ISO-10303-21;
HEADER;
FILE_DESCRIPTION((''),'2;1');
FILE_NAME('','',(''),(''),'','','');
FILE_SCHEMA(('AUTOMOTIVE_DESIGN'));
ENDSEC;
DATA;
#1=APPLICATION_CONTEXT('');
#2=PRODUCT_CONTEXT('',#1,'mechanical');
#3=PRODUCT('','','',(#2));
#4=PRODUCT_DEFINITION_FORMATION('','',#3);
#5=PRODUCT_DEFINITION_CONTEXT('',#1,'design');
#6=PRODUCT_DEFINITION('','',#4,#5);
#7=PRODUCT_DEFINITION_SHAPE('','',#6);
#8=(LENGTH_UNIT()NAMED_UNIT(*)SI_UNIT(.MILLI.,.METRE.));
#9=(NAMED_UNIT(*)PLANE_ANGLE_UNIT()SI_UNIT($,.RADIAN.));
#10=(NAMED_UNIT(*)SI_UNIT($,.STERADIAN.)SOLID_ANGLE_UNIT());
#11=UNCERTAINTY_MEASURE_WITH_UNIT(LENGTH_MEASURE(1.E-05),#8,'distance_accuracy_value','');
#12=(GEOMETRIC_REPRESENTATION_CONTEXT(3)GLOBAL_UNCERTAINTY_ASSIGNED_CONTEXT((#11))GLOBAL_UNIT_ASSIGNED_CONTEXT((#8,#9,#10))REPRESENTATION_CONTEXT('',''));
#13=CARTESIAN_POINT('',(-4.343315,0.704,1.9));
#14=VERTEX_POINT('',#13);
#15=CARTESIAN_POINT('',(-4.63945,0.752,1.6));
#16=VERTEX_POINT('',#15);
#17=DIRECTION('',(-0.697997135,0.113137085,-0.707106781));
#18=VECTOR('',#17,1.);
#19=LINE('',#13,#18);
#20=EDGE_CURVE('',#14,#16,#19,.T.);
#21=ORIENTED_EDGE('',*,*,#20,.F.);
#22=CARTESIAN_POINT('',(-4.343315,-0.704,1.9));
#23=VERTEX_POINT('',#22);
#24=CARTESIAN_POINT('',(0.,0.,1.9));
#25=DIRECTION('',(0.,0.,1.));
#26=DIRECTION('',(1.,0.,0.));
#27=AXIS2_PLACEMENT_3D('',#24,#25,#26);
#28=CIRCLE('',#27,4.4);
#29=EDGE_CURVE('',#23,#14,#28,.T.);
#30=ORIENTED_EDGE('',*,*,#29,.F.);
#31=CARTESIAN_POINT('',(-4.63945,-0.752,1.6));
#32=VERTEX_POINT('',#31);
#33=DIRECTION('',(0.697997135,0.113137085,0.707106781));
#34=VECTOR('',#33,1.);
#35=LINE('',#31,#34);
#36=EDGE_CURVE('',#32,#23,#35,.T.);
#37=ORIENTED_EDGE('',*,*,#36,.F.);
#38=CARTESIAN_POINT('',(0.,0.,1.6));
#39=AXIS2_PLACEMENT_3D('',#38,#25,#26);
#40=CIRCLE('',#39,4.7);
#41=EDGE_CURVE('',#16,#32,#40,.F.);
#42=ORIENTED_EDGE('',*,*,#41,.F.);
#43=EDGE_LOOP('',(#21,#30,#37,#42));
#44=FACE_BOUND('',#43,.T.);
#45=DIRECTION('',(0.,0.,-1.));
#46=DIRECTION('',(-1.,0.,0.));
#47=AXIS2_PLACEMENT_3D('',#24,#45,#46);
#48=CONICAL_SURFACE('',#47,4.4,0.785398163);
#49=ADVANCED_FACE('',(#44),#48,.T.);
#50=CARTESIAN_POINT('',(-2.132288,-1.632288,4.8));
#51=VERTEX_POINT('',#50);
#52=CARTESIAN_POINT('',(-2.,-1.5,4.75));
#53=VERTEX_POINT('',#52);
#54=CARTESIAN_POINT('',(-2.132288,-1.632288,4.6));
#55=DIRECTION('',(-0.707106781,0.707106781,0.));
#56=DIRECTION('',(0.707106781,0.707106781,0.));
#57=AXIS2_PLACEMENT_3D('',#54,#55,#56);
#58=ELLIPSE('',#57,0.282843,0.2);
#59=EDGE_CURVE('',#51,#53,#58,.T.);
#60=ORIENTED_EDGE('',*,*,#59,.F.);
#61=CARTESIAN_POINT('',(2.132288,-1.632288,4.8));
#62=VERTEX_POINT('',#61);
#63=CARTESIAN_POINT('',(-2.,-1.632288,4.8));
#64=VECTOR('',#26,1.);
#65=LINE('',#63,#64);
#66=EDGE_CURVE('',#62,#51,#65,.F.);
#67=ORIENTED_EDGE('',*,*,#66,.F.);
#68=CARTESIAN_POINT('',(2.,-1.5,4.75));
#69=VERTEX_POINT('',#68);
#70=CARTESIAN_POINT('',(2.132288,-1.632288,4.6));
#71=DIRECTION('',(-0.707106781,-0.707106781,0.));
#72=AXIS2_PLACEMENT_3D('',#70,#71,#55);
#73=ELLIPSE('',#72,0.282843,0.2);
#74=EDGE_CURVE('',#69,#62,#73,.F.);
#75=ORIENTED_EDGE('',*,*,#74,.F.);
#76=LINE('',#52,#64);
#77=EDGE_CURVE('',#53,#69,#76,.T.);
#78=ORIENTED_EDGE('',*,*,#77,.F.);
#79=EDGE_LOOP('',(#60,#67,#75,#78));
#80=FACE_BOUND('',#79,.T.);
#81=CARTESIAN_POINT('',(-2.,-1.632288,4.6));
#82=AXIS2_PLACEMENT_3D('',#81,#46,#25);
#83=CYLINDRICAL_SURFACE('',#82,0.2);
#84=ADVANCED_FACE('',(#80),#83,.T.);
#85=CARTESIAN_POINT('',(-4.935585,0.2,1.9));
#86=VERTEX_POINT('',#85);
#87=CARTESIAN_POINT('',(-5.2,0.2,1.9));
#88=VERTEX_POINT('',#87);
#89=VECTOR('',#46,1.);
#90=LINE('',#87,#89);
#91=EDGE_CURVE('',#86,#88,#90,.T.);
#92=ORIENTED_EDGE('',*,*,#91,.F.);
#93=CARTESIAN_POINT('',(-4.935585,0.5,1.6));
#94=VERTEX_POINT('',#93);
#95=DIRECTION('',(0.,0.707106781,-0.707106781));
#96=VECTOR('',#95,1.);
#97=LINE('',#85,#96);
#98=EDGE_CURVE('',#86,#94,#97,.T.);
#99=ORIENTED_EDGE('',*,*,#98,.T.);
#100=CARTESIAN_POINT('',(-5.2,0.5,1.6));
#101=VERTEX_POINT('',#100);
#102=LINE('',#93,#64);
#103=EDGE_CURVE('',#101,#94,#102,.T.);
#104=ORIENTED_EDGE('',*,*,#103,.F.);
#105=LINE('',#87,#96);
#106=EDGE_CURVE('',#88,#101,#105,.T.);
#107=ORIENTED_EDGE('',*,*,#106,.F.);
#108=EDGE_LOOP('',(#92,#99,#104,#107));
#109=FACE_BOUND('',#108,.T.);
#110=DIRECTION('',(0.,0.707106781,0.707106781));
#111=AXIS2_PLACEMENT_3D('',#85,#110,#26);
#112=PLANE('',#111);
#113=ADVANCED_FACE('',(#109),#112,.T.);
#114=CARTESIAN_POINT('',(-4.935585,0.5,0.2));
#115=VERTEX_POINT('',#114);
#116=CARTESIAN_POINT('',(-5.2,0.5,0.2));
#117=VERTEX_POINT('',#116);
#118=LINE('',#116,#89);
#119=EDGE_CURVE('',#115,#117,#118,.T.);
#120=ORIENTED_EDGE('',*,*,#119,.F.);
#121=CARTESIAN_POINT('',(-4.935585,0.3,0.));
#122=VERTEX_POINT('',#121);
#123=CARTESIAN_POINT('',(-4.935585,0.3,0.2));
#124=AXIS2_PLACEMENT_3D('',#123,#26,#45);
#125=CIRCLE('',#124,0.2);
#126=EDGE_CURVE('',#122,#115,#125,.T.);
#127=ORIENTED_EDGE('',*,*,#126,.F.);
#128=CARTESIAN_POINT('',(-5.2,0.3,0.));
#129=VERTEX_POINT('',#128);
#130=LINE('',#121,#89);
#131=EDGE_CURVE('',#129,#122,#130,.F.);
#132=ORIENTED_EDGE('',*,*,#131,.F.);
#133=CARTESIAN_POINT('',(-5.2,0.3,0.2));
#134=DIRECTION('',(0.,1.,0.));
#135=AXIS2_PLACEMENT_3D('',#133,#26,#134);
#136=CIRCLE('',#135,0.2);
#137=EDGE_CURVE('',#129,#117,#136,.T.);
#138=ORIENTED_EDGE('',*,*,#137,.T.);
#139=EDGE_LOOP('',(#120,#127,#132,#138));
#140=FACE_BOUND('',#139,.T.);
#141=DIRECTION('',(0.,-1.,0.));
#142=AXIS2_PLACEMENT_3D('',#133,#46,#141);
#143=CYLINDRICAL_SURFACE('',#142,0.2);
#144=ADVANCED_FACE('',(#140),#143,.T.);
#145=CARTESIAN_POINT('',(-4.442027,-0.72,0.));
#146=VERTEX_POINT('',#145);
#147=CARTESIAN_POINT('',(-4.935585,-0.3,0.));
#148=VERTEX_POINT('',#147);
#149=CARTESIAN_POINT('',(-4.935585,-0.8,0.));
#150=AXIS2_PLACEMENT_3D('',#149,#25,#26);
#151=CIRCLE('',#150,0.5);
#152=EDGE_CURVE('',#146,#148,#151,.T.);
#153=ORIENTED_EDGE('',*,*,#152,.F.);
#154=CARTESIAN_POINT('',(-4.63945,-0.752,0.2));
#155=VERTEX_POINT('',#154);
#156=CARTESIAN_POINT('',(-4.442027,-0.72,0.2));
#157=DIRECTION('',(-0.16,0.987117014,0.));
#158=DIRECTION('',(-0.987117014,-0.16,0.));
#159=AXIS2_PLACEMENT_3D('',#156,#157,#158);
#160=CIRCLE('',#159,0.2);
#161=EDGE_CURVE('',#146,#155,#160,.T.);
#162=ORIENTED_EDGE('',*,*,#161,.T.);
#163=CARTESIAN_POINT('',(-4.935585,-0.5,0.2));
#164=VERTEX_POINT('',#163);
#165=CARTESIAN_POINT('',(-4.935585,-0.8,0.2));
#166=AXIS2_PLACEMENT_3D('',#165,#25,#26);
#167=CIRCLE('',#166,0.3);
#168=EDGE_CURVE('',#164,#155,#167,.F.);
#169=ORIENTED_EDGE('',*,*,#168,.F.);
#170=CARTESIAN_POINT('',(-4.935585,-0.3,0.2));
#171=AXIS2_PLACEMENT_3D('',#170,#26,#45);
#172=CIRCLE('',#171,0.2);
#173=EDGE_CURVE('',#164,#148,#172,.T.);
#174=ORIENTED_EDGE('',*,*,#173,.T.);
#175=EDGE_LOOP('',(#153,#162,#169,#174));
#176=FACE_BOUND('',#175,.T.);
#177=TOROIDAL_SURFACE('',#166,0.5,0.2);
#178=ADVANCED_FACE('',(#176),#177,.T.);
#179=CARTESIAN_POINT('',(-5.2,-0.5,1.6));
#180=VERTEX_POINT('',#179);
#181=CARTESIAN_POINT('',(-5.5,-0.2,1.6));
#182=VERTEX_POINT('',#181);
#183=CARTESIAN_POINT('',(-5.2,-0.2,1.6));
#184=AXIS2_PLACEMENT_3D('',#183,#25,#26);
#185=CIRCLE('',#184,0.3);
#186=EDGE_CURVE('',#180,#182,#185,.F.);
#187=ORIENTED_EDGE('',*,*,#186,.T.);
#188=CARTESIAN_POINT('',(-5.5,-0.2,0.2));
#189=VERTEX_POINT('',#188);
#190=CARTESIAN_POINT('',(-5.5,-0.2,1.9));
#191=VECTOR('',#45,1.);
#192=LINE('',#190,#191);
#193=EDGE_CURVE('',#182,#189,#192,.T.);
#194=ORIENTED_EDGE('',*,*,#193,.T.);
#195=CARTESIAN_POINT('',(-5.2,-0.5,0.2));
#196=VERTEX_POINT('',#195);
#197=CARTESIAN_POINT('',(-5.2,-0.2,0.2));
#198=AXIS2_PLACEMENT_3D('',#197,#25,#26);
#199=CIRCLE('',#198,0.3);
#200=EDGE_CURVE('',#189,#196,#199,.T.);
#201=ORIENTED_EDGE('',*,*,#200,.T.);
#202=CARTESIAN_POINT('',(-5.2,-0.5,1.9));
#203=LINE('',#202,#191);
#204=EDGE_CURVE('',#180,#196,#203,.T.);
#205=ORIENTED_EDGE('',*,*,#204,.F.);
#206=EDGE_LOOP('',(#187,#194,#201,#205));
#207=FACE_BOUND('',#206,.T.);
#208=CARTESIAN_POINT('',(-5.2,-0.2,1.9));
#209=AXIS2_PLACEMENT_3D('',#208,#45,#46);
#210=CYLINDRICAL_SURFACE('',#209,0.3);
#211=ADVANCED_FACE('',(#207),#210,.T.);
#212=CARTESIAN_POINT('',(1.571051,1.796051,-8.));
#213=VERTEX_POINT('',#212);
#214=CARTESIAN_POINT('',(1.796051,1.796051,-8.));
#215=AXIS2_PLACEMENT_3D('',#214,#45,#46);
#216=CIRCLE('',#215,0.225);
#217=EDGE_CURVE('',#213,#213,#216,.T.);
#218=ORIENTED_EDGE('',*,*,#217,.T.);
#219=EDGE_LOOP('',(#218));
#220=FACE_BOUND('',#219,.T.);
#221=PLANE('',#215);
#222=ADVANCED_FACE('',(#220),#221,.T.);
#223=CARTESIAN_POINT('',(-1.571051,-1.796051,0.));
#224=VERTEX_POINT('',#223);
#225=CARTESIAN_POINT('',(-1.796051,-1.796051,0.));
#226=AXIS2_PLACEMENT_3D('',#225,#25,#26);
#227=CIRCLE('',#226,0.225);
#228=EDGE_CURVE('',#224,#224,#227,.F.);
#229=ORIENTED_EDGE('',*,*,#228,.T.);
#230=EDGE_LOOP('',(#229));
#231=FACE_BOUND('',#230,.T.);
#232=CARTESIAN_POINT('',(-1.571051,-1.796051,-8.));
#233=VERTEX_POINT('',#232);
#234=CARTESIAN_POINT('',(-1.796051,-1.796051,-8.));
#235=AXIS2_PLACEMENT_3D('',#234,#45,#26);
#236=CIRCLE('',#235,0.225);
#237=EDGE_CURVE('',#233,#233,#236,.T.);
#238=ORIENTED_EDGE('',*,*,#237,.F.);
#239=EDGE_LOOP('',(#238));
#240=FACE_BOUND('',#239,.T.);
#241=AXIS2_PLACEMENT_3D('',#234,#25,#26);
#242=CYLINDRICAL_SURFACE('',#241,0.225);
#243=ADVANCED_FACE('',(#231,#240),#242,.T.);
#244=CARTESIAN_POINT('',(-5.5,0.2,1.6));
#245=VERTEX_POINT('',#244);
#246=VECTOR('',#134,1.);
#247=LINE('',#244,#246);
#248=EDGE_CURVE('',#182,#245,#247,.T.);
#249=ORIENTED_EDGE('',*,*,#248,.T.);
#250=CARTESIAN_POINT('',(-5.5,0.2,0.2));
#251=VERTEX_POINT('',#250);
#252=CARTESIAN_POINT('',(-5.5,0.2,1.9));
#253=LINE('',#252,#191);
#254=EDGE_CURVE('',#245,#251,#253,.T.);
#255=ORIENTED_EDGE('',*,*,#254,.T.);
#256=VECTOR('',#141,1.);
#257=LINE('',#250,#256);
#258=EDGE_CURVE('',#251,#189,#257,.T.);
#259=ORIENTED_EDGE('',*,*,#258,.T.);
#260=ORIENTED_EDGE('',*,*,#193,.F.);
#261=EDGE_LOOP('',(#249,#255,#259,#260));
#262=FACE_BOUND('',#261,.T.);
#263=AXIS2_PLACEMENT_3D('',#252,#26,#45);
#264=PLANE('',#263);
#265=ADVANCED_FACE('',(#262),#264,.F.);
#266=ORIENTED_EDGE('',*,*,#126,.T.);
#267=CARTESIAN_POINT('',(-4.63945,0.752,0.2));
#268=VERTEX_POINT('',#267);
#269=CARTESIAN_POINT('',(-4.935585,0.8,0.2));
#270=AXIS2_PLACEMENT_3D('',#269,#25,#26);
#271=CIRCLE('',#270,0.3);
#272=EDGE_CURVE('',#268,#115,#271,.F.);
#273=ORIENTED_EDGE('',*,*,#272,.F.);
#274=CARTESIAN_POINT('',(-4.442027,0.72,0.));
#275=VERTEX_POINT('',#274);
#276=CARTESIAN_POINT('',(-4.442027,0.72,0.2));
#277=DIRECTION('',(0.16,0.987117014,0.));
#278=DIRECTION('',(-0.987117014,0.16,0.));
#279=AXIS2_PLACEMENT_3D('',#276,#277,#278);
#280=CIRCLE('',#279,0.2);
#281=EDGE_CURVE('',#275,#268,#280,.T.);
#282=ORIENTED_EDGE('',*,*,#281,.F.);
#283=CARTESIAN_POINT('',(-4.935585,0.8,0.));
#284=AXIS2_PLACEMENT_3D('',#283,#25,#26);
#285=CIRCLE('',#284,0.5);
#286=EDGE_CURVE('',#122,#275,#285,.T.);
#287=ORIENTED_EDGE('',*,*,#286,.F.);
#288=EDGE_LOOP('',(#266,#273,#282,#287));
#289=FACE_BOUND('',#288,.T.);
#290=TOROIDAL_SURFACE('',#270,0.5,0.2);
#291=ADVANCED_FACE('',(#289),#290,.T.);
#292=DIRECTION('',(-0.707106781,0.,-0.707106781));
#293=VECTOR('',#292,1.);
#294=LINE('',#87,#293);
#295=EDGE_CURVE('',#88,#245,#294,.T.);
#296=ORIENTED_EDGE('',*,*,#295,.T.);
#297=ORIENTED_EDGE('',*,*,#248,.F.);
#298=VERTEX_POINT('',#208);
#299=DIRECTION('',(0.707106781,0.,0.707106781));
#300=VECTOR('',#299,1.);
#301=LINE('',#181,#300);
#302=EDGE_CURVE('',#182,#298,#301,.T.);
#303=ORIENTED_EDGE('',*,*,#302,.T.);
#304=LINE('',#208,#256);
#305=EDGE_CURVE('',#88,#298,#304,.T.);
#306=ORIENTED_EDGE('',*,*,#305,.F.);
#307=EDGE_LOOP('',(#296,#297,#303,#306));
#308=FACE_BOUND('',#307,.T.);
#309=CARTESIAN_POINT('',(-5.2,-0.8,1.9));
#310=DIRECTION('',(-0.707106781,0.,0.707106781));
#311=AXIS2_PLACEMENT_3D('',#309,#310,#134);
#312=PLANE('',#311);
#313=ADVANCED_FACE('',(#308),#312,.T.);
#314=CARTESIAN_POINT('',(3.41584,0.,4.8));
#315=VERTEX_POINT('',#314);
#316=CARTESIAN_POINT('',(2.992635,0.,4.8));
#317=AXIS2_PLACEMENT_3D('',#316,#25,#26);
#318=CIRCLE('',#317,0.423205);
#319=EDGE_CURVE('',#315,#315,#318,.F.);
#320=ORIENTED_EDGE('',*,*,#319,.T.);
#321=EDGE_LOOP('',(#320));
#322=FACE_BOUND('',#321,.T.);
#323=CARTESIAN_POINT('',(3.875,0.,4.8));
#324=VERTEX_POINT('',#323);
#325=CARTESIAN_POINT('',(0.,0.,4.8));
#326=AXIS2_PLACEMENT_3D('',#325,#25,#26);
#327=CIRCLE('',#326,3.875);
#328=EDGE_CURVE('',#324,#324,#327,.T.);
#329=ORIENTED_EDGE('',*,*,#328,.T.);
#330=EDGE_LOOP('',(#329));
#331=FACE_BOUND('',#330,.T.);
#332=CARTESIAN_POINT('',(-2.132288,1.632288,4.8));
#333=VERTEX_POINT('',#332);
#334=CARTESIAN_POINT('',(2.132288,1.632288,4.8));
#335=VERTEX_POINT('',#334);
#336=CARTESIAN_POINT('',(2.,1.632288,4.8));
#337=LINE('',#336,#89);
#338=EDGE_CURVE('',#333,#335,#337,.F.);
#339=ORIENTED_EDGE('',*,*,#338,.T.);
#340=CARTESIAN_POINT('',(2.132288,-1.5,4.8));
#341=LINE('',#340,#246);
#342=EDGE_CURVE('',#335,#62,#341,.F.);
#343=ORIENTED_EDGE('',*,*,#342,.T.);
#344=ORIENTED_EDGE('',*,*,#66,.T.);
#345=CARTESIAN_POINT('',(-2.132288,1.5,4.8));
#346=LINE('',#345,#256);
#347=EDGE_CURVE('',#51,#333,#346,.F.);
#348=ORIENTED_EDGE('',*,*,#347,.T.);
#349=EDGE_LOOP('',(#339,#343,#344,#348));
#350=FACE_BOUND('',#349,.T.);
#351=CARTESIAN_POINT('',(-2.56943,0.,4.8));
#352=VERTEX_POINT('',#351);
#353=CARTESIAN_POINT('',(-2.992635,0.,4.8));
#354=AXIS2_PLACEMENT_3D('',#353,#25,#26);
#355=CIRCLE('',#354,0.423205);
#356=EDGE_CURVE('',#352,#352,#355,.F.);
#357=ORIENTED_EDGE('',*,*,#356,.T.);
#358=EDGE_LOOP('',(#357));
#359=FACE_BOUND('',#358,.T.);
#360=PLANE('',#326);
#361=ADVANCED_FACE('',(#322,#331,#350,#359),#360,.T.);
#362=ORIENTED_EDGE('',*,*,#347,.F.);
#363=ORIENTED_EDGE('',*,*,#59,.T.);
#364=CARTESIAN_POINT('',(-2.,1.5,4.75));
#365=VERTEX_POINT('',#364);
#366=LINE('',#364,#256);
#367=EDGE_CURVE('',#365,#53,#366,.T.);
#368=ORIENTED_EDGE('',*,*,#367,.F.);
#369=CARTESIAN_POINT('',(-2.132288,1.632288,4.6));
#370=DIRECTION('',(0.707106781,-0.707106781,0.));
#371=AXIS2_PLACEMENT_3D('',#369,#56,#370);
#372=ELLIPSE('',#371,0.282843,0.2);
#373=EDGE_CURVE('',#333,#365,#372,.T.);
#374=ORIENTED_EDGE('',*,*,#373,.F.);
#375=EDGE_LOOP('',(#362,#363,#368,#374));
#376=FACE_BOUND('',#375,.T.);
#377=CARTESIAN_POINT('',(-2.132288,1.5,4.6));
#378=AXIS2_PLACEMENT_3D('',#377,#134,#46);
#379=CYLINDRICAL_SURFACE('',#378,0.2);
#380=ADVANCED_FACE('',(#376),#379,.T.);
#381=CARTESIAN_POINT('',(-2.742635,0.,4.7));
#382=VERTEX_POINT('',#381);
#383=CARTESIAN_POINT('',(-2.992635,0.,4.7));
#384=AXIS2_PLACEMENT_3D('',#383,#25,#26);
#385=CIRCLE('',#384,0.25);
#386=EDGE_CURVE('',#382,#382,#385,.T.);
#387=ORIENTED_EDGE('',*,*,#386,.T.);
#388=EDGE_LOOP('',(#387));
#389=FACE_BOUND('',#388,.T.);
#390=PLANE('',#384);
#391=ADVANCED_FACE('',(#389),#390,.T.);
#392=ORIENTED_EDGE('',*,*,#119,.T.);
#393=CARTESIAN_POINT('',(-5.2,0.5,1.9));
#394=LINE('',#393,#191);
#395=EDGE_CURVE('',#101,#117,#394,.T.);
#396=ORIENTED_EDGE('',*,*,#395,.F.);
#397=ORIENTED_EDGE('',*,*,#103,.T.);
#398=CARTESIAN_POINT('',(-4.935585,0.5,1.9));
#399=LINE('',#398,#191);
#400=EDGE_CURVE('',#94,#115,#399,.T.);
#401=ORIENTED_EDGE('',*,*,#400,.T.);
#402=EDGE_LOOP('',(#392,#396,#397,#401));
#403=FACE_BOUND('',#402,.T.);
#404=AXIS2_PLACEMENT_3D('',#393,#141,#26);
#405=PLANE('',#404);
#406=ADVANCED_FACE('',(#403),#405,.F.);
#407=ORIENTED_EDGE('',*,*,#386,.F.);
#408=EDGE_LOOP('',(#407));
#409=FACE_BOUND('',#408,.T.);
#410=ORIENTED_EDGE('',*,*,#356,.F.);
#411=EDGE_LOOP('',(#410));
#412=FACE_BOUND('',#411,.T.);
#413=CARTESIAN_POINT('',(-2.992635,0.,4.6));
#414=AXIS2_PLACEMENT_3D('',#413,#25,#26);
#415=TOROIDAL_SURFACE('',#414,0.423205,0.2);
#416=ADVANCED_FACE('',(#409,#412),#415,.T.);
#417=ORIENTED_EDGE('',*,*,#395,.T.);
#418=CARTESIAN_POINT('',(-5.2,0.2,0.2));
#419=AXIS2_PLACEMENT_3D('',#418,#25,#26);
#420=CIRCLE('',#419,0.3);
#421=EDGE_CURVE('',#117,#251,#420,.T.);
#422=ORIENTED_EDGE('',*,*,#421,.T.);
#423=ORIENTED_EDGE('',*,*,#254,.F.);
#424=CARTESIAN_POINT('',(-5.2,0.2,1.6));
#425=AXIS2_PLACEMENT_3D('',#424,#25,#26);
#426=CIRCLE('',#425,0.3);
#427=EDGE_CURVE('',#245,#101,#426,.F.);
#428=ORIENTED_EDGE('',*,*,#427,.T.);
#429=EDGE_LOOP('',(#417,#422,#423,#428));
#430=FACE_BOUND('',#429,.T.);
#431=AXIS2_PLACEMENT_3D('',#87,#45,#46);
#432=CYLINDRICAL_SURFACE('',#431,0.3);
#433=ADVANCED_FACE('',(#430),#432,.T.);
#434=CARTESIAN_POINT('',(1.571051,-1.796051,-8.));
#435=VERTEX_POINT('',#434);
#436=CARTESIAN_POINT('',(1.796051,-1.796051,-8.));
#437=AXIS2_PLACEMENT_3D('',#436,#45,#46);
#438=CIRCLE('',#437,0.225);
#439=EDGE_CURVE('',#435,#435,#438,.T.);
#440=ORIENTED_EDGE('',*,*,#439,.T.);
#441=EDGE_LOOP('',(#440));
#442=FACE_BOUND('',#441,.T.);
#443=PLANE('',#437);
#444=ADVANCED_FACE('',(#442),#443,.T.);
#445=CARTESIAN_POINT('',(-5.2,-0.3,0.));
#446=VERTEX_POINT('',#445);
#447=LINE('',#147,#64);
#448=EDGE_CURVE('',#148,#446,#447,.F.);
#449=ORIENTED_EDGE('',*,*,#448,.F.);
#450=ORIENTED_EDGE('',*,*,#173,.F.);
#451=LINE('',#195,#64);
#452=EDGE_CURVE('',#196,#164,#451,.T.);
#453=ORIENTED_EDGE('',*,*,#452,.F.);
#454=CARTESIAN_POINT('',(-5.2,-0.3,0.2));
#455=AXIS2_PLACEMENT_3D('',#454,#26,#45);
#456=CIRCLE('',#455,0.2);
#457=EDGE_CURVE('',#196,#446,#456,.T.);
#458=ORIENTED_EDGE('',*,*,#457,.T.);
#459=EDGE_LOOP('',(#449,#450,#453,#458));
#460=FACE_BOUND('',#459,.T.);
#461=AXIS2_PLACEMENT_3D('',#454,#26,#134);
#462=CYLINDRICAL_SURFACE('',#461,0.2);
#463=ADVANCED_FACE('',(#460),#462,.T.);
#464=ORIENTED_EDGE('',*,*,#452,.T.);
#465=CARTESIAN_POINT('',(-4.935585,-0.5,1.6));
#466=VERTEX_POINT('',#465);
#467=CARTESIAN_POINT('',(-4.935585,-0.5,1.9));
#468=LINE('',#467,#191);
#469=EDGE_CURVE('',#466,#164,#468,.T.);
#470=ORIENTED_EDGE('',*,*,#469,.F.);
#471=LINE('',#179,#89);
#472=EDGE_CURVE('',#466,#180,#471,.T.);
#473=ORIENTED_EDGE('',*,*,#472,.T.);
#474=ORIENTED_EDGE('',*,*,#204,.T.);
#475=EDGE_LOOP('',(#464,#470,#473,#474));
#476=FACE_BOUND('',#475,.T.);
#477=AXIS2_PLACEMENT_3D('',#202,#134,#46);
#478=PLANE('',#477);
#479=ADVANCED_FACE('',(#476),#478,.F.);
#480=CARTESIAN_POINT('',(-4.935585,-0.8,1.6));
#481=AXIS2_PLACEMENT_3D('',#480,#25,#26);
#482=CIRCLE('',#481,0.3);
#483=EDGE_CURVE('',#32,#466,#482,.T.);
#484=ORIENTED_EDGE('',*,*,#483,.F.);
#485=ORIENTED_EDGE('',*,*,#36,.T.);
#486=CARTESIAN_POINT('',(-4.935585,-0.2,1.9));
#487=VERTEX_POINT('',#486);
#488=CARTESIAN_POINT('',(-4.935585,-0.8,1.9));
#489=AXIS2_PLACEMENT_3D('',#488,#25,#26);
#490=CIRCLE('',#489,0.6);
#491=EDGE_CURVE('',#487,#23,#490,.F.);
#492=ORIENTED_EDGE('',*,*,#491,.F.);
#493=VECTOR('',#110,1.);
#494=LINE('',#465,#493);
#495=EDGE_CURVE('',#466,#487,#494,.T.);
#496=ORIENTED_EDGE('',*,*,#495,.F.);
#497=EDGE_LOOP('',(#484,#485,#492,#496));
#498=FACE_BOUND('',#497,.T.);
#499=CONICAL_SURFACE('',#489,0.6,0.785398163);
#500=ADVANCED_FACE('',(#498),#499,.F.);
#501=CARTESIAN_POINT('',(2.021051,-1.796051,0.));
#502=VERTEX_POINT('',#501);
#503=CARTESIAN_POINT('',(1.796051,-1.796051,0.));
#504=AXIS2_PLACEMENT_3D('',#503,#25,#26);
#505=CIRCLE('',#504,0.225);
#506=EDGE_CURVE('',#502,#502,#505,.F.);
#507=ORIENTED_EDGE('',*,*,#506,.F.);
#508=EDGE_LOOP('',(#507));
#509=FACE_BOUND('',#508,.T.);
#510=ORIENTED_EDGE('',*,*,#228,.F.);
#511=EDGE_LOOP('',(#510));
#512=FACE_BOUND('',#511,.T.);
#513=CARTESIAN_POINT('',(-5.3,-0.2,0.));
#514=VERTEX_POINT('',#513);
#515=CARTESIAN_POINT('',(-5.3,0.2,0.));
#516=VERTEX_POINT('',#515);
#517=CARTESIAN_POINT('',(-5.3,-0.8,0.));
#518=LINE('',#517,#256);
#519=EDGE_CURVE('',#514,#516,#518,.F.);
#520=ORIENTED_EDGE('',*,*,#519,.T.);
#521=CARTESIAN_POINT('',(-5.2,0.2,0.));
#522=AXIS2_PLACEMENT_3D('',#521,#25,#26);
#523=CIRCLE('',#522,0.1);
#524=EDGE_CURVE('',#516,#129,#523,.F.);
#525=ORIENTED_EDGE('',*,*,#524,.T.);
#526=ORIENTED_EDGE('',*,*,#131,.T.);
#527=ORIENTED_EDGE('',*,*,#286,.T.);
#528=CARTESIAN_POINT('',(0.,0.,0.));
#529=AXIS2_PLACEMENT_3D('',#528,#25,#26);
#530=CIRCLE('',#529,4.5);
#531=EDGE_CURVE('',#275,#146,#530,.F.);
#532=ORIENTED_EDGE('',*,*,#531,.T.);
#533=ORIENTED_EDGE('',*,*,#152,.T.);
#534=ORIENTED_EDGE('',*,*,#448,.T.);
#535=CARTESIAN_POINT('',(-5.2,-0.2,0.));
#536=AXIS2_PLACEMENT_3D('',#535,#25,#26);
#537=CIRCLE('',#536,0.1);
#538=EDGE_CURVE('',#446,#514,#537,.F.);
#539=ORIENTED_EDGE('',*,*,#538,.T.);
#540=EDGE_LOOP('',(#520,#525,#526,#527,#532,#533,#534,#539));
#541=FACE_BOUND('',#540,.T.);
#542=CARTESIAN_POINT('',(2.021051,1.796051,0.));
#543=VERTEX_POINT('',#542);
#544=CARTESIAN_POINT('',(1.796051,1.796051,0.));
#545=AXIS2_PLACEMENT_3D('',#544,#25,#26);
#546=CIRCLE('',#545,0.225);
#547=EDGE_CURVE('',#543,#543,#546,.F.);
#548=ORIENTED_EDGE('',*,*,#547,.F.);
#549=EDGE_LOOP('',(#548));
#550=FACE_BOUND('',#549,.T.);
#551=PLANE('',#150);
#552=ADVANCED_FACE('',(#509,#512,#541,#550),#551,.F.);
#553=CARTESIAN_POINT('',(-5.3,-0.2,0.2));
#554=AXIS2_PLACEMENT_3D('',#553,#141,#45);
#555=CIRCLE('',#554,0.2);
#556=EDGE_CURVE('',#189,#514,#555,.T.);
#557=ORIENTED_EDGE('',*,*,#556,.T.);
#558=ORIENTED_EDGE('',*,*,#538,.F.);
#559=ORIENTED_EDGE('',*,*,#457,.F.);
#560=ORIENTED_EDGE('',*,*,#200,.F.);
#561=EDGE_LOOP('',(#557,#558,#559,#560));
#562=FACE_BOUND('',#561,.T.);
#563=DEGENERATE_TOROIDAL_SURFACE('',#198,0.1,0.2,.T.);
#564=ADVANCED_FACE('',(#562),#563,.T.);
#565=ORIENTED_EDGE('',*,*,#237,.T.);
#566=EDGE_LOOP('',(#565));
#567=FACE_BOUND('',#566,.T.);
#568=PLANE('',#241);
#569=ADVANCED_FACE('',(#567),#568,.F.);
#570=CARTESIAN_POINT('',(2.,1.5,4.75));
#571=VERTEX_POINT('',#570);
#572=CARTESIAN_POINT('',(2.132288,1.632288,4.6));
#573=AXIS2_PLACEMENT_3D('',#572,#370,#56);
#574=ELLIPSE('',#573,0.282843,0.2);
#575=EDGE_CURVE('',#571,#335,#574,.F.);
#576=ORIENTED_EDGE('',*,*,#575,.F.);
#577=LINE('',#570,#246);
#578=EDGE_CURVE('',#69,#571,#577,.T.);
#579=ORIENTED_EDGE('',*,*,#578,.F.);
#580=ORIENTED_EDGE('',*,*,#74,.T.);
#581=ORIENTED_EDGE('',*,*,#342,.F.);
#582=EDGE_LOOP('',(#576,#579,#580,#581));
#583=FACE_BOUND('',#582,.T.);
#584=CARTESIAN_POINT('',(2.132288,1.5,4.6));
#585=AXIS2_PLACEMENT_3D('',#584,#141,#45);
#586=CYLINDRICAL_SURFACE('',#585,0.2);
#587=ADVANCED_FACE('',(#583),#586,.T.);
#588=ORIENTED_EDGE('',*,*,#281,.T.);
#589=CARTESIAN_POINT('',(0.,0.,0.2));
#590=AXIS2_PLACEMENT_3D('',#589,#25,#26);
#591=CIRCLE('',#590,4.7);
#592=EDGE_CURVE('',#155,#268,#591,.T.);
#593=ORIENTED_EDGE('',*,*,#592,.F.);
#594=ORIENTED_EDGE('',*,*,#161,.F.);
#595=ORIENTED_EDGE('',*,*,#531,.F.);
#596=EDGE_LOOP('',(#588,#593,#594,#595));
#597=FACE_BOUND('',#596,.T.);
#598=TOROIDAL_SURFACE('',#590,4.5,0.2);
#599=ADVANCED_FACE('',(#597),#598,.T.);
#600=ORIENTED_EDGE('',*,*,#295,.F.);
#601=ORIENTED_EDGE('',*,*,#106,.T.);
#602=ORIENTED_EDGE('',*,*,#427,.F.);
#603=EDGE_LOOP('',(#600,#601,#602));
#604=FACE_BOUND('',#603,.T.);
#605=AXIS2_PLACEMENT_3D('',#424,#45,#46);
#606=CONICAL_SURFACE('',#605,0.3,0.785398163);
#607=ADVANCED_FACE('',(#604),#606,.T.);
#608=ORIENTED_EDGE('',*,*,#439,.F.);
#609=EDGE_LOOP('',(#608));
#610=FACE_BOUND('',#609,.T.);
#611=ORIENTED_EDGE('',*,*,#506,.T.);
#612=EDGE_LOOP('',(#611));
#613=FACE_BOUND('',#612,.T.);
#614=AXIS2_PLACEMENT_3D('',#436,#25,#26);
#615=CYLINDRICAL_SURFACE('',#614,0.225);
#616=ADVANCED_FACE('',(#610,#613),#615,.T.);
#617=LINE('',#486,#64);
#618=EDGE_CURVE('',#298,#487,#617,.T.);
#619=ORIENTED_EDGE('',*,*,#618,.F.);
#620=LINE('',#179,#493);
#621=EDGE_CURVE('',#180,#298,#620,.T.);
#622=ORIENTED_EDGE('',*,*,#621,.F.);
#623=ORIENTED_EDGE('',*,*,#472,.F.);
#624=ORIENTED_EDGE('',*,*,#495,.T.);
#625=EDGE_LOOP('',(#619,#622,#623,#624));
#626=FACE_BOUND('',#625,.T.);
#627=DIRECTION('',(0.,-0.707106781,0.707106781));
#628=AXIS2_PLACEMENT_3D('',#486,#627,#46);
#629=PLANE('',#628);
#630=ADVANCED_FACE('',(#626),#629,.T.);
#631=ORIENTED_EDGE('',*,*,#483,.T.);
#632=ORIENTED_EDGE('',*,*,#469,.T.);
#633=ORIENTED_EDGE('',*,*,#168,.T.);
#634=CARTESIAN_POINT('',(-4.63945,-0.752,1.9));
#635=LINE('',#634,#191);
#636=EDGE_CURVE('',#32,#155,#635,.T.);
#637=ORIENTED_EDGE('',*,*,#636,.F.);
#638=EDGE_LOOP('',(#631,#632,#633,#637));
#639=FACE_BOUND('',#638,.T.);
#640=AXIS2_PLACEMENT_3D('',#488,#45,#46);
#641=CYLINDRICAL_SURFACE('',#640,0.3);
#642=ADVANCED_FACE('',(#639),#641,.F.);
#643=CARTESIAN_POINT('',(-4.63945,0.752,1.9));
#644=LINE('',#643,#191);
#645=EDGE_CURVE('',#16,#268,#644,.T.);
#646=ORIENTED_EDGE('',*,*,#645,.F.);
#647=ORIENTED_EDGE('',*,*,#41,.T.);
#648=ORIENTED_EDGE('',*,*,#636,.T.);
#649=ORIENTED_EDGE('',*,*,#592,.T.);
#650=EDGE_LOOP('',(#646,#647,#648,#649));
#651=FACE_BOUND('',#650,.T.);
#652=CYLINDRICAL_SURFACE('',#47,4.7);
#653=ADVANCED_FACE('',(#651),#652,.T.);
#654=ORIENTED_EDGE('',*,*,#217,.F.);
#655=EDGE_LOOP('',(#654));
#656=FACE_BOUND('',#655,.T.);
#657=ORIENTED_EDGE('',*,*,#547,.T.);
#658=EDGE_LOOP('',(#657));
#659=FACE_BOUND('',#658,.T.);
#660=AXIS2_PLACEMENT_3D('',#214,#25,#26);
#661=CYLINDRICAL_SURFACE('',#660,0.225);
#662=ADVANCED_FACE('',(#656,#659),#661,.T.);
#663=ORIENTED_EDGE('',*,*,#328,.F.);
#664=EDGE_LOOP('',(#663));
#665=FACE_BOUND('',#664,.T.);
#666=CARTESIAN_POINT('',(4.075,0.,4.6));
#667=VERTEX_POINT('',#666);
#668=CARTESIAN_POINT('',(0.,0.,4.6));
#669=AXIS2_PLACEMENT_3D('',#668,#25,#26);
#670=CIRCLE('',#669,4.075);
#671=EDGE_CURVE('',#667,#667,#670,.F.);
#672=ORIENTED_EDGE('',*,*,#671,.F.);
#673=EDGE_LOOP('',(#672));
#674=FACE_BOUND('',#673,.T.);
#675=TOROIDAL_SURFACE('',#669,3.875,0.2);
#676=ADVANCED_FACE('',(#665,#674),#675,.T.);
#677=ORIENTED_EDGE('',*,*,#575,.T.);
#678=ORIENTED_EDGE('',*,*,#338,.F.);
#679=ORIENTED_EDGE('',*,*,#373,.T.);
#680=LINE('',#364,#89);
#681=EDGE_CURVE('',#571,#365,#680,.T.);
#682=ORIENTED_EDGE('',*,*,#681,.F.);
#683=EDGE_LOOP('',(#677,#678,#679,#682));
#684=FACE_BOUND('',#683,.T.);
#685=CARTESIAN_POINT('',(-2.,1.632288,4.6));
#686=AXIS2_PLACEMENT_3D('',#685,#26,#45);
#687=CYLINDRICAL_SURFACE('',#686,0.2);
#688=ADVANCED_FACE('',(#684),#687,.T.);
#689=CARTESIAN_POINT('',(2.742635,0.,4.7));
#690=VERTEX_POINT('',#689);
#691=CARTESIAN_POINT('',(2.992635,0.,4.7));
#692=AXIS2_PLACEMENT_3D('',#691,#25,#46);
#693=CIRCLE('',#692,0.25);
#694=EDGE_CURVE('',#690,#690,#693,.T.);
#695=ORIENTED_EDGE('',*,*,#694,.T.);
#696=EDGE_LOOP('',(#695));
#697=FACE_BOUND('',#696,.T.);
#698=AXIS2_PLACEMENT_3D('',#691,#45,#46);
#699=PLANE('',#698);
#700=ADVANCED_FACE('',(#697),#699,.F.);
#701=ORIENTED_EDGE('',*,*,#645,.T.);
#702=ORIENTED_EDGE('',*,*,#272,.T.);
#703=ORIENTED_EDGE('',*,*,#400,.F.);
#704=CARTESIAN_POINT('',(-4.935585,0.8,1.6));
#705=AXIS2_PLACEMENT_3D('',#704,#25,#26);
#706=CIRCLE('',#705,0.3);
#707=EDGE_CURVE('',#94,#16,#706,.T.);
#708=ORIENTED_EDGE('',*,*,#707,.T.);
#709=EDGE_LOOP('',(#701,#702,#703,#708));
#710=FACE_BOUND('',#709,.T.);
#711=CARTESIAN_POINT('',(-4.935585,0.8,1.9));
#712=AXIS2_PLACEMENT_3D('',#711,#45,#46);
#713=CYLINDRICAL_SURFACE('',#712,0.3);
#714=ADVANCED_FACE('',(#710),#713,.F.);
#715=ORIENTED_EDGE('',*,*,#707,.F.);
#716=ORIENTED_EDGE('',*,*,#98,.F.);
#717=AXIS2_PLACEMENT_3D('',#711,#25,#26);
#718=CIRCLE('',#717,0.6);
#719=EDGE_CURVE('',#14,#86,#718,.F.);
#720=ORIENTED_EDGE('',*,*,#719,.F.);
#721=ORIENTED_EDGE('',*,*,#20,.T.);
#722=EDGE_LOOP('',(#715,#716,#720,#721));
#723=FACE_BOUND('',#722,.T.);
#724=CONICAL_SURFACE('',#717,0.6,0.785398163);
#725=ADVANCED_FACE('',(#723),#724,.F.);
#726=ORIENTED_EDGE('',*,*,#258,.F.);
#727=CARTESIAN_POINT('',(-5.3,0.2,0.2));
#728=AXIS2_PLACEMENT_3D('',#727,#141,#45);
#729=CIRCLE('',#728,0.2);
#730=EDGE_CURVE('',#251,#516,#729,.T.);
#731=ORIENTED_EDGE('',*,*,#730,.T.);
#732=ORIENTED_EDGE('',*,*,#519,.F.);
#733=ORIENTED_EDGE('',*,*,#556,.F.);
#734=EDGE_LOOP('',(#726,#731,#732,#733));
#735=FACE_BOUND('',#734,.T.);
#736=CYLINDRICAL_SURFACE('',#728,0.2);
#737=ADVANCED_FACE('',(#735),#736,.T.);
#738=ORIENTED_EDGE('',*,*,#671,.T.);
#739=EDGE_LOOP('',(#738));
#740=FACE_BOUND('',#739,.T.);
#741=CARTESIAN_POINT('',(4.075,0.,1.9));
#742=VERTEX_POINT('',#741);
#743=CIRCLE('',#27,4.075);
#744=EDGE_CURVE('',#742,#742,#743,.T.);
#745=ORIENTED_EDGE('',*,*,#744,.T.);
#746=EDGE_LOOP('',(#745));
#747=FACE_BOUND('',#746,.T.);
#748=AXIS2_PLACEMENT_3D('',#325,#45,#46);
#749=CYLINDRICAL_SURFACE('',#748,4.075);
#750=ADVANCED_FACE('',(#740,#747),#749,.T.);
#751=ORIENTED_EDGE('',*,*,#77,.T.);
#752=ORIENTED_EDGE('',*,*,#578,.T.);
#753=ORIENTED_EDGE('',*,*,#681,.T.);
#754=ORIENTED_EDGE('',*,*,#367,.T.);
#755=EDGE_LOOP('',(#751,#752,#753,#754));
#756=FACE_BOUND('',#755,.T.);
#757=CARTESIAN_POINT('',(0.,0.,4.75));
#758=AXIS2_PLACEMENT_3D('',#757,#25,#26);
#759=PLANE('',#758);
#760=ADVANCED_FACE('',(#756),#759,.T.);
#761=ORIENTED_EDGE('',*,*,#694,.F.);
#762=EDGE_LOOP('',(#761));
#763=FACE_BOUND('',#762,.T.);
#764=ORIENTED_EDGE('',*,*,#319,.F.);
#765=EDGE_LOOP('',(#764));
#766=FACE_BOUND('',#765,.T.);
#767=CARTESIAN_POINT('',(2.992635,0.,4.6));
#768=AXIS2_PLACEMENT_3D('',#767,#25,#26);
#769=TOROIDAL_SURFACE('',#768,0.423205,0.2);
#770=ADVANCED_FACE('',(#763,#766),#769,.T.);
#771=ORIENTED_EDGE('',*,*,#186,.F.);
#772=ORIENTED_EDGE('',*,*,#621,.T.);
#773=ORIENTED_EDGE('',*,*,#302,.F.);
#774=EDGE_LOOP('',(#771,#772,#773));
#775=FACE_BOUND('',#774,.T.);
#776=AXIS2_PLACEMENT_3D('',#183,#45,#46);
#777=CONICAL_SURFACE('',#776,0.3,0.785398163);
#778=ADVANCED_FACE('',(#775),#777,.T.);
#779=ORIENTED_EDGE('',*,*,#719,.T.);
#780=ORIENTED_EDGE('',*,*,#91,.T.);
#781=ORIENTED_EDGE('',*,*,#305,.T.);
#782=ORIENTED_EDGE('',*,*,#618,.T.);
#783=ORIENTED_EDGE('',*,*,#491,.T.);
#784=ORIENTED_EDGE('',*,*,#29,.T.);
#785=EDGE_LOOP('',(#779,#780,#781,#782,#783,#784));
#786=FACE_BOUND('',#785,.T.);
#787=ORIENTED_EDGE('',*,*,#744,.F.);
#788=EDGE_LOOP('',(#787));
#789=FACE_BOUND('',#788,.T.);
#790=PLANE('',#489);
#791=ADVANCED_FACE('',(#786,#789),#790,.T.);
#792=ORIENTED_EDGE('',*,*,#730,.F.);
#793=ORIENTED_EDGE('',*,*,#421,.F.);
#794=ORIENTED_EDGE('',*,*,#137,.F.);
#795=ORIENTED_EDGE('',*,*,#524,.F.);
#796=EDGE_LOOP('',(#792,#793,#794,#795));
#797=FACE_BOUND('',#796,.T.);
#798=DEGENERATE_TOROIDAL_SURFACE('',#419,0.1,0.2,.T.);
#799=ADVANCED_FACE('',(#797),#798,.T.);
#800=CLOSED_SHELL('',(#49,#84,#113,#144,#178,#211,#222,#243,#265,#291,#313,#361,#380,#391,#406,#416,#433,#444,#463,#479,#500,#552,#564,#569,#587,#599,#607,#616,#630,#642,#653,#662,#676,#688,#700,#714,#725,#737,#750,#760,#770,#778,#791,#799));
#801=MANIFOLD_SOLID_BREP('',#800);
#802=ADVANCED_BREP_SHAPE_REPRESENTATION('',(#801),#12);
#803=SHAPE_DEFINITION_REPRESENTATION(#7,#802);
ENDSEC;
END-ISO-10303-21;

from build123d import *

# Parameters (mm, degrees)
EXTRUDE_423_DEPTH      = 1.9
SKETCH_3_R             = 4.075
EXTRUDE_611_DEPTH      = 2.9
SKETCH_6_W             = 4
SKETCH_6_H             = 3
CUT_EXTRUDE_758_DEPTH  = 0.05
SKETCH_7_R             = 0.25
CUT_EXTRUDE_1008_DEPTH = 0.1
SKETCH_4_R             = 0.225
EXTRUDE_1392_DEPTH     = 8
CHAMFER_1_SIZE         = 0.3
FILLET_1_R             = 0.2


# Some blends are built 0.0001 mm under size
with BuildPart() as part:
    # 草图2 → Extrude 423 (new body)
    with BuildSketch(Plane.XY):
        with BuildLine():
            Line((-5.5, 0.2), (-5.5, -0.2))
            ThreePointArc((-5.5, -0.2), (-5.412132034, -0.412132034), (-5.2, -0.5))
            Line((-5.2, -0.5), (-4.935585072, -0.5))
            ThreePointArc((-4.935585072, -0.5), (-4.741162851, -0.571526807), (-4.639449967, -0.752))
            ThreePointArc((-4.639449967, -0.752), (4.7, 0), (-4.639449967, 0.752))
            ThreePointArc((-4.639449967, 0.752), (-4.741162851, 0.571526807), (-4.935585072, 0.5))
            Line((-4.935585072, 0.5), (-5.2, 0.5))
            ThreePointArc((-5.2, 0.5), (-5.412132034, 0.412132034), (-5.5, 0.2))
        make_face()
    extrude(amount=EXTRUDE_423_DEPTH)

    # 草图3 → Extrude 611 (add)
    with BuildSketch(Plane.XY.offset(1.9)):
        Circle(SKETCH_3_R)
    extrude(amount=EXTRUDE_611_DEPTH)

    # 草图6 → Cut-Extrude 758 (cut)
    with BuildSketch(Plane.XY.offset(4.8)):
        Rectangle(SKETCH_6_W, SKETCH_6_H)
    extrude(amount=-CUT_EXTRUDE_758_DEPTH, mode=Mode.SUBTRACT)

    # 草图7 → Cut-Extrude 1008 (cut)
    with BuildSketch(Plane.XY.offset(4.8)):
        with Locations((-2.992635388, 0)):
            Circle(SKETCH_7_R)
        with Locations(Location((2.992635388, 0, 0), (0, 0, 180))):
            Circle(SKETCH_7_R)
    extrude(amount=-CUT_EXTRUDE_1008_DEPTH, mode=Mode.SUBTRACT)

    # 草图4 → Extrude 1392 (add)
    with BuildSketch(Plane(origin=(0, 0, 0), x_dir=(-1, 0, 0), z_dir=(0, 0, -1))):
        with Locations(Location((-1.796051224, -1.796051224, 0), (0, 0, 180))):
            Circle(SKETCH_4_R)
        with Locations(Location((-1.796051224, 1.796051224, 0), (0, 0, 180))):
            Circle(SKETCH_4_R)
        with Locations(Location((1.796051224, -1.796051224, 0), (0, 0, 180))):
            Circle(SKETCH_4_R)
    extrude(amount=EXTRUDE_1392_DEPTH)

    # 倒角1
    chamfer_1_edges = [part.edges().sort_by_distance(p)[0] for p in [
        (-4.741162851, 0.571526807, 1.9),
        (-5.067792536, 0.5, 1.9),
        (-5.412132034, 0.412132034, 1.9),
        (-5.5, 0, 1.9),
        (-5.412132034, -0.412132034, 1.9),
        (-5.067792536, -0.5, 1.9),
        (-4.741162851, -0.571526807, 1.9),
        (4.7, 0, 1.9),
    ]]
    chamfer(chamfer_1_edges, length=CHAMFER_1_SIZE - 0.0001)  # a hair under: the kernel refuses the full size

    # 圆角1
    # the kernel refuses this fillet: 0.2 mm, written as the material it takes off along each edge
    with BuildSketch(Plane(origin=(-4.935585072, -0.8, 0), x_dir=(0, 1, 0), z_dir=(-1, 0, 0))) as fillet_1_piece_1:
        with BuildLine():
            CenterArc((0.3 + FILLET_1_R, -FILLET_1_R), FILLET_1_R, 90, 90)
            Line((0.3, -FILLET_1_R), (0.3 - FILLET_1_R * 0.02, -FILLET_1_R))
            Line((0.3 - FILLET_1_R * 0.02, -FILLET_1_R), (0.3 - FILLET_1_R * 0.02, FILLET_1_R * 0.02))
            Line((0.3 - FILLET_1_R * 0.02, FILLET_1_R * 0.02), (0.3 + FILLET_1_R, FILLET_1_R * 0.02))
            Line((0.3 + FILLET_1_R, FILLET_1_R * 0.02), (0.3 + FILLET_1_R, 0))
        make_face()
    revolve(axis=Axis((-4.935585072, -0.8, 0), (0, 0, -1)), revolution_arc=80.793103779, mode=Mode.SUBTRACT)
    with BuildSketch(Plane(origin=(-5.2, -0.5, 0), x_dir=(0, 1, 0), z_dir=(1, 0, 0))) as fillet_1_piece_2:
        with BuildLine():
            CenterArc((FILLET_1_R, FILLET_1_R), FILLET_1_R, 180, 90)
            Line((0, FILLET_1_R), (-FILLET_1_R * 0.02, FILLET_1_R))
            Line((-FILLET_1_R * 0.02, FILLET_1_R), (-FILLET_1_R * 0.02, -FILLET_1_R * 0.02))
            Line((-FILLET_1_R * 0.02, -FILLET_1_R * 0.02), (FILLET_1_R, -FILLET_1_R * 0.02))
            Line((FILLET_1_R, -FILLET_1_R * 0.02), (FILLET_1_R, 0))
        make_face()
    extrude(amount=0.264414928, mode=Mode.SUBTRACT)
    with BuildSketch(Plane(origin=(-5.2, -0.2, 0), x_dir=(-1, 0, 0), z_dir=(0, 1, 0))) as fillet_1_piece_3:
        with BuildLine():
            CenterArc((0.3 - FILLET_1_R, FILLET_1_R), FILLET_1_R, 270, 90)
            Line((0.3, FILLET_1_R), (0.3 + FILLET_1_R * 0.02, FILLET_1_R))
            Line((0.3 + FILLET_1_R * 0.02, FILLET_1_R), (0.3 + FILLET_1_R * 0.02, -FILLET_1_R * 0.02))
            Line((0.3 + FILLET_1_R * 0.02, -FILLET_1_R * 0.02), (0.3 - FILLET_1_R, -FILLET_1_R * 0.02))
            Line((0.3 - FILLET_1_R, -FILLET_1_R * 0.02), (0.3 - FILLET_1_R, 0))
        make_face()
    revolve(axis=Axis((-5.2, -0.2, 0), (0, 0, 1)), revolution_arc=90, mode=Mode.SUBTRACT)
    with BuildSketch(Plane(origin=(-5.5, 0.2, 0), x_dir=(1, 0, 0), z_dir=(0, -1, 0))) as fillet_1_piece_4:
        with BuildLine():
            CenterArc((FILLET_1_R, FILLET_1_R), FILLET_1_R, 180, 90)
            Line((0, FILLET_1_R), (-FILLET_1_R * 0.02, FILLET_1_R))
            Line((-FILLET_1_R * 0.02, FILLET_1_R), (-FILLET_1_R * 0.02, -FILLET_1_R * 0.02))
            Line((-FILLET_1_R * 0.02, -FILLET_1_R * 0.02), (FILLET_1_R, -FILLET_1_R * 0.02))
            Line((FILLET_1_R, -FILLET_1_R * 0.02), (FILLET_1_R, 0))
        make_face()
    extrude(amount=0.4, mode=Mode.SUBTRACT)
    with BuildSketch(Plane(origin=(-5.2, 0.2, 0), x_dir=(0, 1, 0), z_dir=(1, 0, 0))) as fillet_1_piece_5:
        with BuildLine():
            CenterArc((0.3 - FILLET_1_R, FILLET_1_R), FILLET_1_R, 270, 90)
            Line((0.3 - FILLET_1_R, 0), (0.3 - FILLET_1_R, -FILLET_1_R * 0.02))
            Line((0.3 - FILLET_1_R, -FILLET_1_R * 0.02), (0.3 + FILLET_1_R * 0.02, -FILLET_1_R * 0.02))
            Line((0.3 + FILLET_1_R * 0.02, -FILLET_1_R * 0.02), (0.3 + FILLET_1_R * 0.02, FILLET_1_R))
            Line((0.3 + FILLET_1_R * 0.02, FILLET_1_R), (0.3, FILLET_1_R))
        make_face()
    revolve(axis=Axis((-5.2, 0.2, 0), (0, 0, 1)), revolution_arc=90, mode=Mode.SUBTRACT)
    with BuildSketch(Plane(origin=(-4.935585072, 0.5, 0), x_dir=(0, 0, 1), z_dir=(-1, 0, 0))) as fillet_1_piece_6:
        with BuildLine():
            CenterArc((FILLET_1_R, -FILLET_1_R), FILLET_1_R, 90, 90)
            Line((0, -FILLET_1_R), (-FILLET_1_R * 0.02, -FILLET_1_R))
            Line((-FILLET_1_R * 0.02, -FILLET_1_R), (-FILLET_1_R * 0.02, FILLET_1_R * 0.02))
            Line((-FILLET_1_R * 0.02, FILLET_1_R * 0.02), (FILLET_1_R, FILLET_1_R * 0.02))
            Line((FILLET_1_R, FILLET_1_R * 0.02), (FILLET_1_R, 0))
        make_face()
    extrude(amount=0.264414928, mode=Mode.SUBTRACT)
    with BuildSketch(Plane(origin=(-4.935585072, 0.8, 0), x_dir=(0.9871170143402451, -0.16000000000000056, 0), z_dir=(0.16000000000000056, 0.9871170143402451, 0))) as fillet_1_piece_7:
        with BuildLine():
            CenterArc((0.3 + FILLET_1_R, -FILLET_1_R), FILLET_1_R, 90, 90)
            Line((0.3, -FILLET_1_R), (0.3 - FILLET_1_R * 0.02, -FILLET_1_R))
            Line((0.3 - FILLET_1_R * 0.02, -FILLET_1_R), (0.3 - FILLET_1_R * 0.02, FILLET_1_R * 0.02))
            Line((0.3 - FILLET_1_R * 0.02, FILLET_1_R * 0.02), (0.3 + FILLET_1_R, FILLET_1_R * 0.02))
            Line((0.3 + FILLET_1_R, FILLET_1_R * 0.02), (0.3 + FILLET_1_R, 0))
        make_face()
    revolve(axis=Axis((-4.935585072, 0.8, 0), (0, 0, -1)), revolution_arc=80.793103779, mode=Mode.SUBTRACT)
    with BuildSketch(Plane(origin=(0, 0, 4.8), x_dir=(1, 0, 0), z_dir=(0, -1, 0))) as fillet_1_piece_8:
        with BuildLine():
            CenterArc((4.075 - FILLET_1_R, -FILLET_1_R), FILLET_1_R, 0, 90)
            Line((4.075 - FILLET_1_R, 0), (4.075 - FILLET_1_R, FILLET_1_R * 0.02))
            Line((4.075 - FILLET_1_R, FILLET_1_R * 0.02), (4.075 + FILLET_1_R * 0.02, FILLET_1_R * 0.02))
            Line((4.075 + FILLET_1_R * 0.02, FILLET_1_R * 0.02), (4.075 + FILLET_1_R * 0.02, -FILLET_1_R))
            Line((4.075 + FILLET_1_R * 0.02, -FILLET_1_R), (4.075, -FILLET_1_R))
        make_face()
    revolve(axis=Axis((0, 0, 4.8), (0, 0, 1)), mode=Mode.SUBTRACT)
    with BuildSketch(Plane(origin=(0, 0, 0), x_dir=(-0.9871170143402452, -0.16000000000000036, 0), z_dir=(-0.16000000000000036, 0.9871170143402452, 0))) as fillet_1_piece_9:
        with BuildLine():
            CenterArc((4.7 - FILLET_1_R, FILLET_1_R), FILLET_1_R, 270, 90)
            Line((4.7, FILLET_1_R), (4.7 + FILLET_1_R * 0.02, FILLET_1_R))
            Line((4.7 + FILLET_1_R * 0.02, FILLET_1_R), (4.7 + FILLET_1_R * 0.02, -FILLET_1_R * 0.02))
            Line((4.7 + FILLET_1_R * 0.02, -FILLET_1_R * 0.02), (4.7 - FILLET_1_R, -FILLET_1_R * 0.02))
            Line((4.7 - FILLET_1_R, -FILLET_1_R * 0.02), (4.7 - FILLET_1_R, 0))
        make_face()
    revolve(axis=Axis((0, 0, 0), (0, 0, 1)), revolution_arc=341.586207557, mode=Mode.SUBTRACT)
    with BuildSketch(Plane(origin=(2.992635388, 0, 4.8), x_dir=(-1, 0, 0), z_dir=(0, 1, 0))) as fillet_1_piece_10:
        with BuildLine():
            CenterArc((0.423205081, -0.2), FILLET_1_R, 90, 60)
            Line((0.25, -0.1), (0.246535898, -0.098))
            ThreePointArc((0.246535898, -0.098), (0.246, -0.05), (0.246, 0))
            Line((0.246, 0), (0.25, 0.004))
            Line((0.25, 0.004), (0.423205081, 0.004))
            Line((0.423205081, 0.004), (0.423205081, 0))
        make_face()
    revolve(axis=Axis((2.992635388, 0, 4.8), (0, 0, 1)), mode=Mode.SUBTRACT)
    with BuildSketch(Plane(origin=(-2.992635388, 0, 4.8), x_dir=(1, 0, 0), z_dir=(0, -1, 0))) as fillet_1_piece_11:
        with BuildLine():
            CenterArc((0.423205081, -0.2), FILLET_1_R, 90, 60)
            Line((0.25, -0.1), (0.246535898, -0.098))
            ThreePointArc((0.246535898, -0.098), (0.246, -0.05), (0.246, 0))
            Line((0.246, 0), (0.25, 0.004))
            Line((0.25, 0.004), (0.423205081, 0.004))
            Line((0.423205081, 0.004), (0.423205081, 0))
        make_face()
    revolve(axis=Axis((-2.992635388, 0, 4.8), (0, 0, 1)), mode=Mode.SUBTRACT)
    with BuildSketch(Plane(origin=(-2, 1.5, 4.8), x_dir=(0, 1, 0), z_dir=(1, 0, 0)), Plane(origin=(2, -1.5, 4.8), x_dir=(0, -1, 0), z_dir=(-1, 0, 0))) as fillet_1_piece_12:
        with BuildLine():
            CenterArc((0.132287566, -0.2), FILLET_1_R, 90, 41.409622109)
            Line((0, -0.05), (-0.002645751, -0.047))
            ThreePointArc((-0.002645751, -0.047), (-0.004, -0.025), (-0.004, 0))
            Line((-0.004, 0), (0, 0.004))
            Line((0, 0.004), (0.132287566, 0.004))
            Line((0.132287566, 0.004), (0.132287566, 0))
        make_face()
    extrude(amount=4, mode=Mode.SUBTRACT)
    with BuildSketch(Plane(origin=(-2, -1.5, 4.8), x_dir=(-1, 0, 0), z_dir=(0, 1, 0)), Plane(origin=(2, 1.5, 4.8), x_dir=(1, 0, 0), z_dir=(0, -1, 0))) as fillet_1_piece_13:
        with BuildLine():
            CenterArc((0.132287566, -0.2), FILLET_1_R, 90, 41.409622109)
            Line((0, -0.05), (-0.002645751, -0.047))
            ThreePointArc((-0.002645751, -0.047), (-0.004, -0.025), (-0.004, 0))
            Line((-0.004, 0), (0, 0.004))
            Line((0, 0.004), (0.132287566, 0.004))
            Line((0.132287566, 0.004), (0.132287566, 0))
        make_face()
    extrude(amount=3, mode=Mode.SUBTRACT)
    with BuildSketch(Plane(origin=(-2, -1.5, 4.8), x_dir=(-1, 0, 0), z_dir=(0, 1, 0))) as fillet_1_piece_14a_section:
        with BuildLine():
            CenterArc((0.132287566, -0.2), FILLET_1_R, 90, 41.409622109)
            Line((0, -0.05), (-0.002645751, -0.047))
            ThreePointArc((-0.002645751, -0.047), (-0.004, -0.025), (-0.004, 0))
            Line((-0.004, 0), (0, 0.004))
            Line((0, 0.004), (0.132287566, 0.004))
            Line((0.132287566, 0.004), (0.132287566, 0))
        make_face()
    fillet_1_piece_14a = extrude(amount=3.330718914, mode=Mode.PRIVATE)
    fillet_1_piece_14a = split(fillet_1_piece_14a, bisect_by=Plane(origin=(-2.036281513, 1.5, 4.788045002), z_dir=(0, 1, 0)), keep=Keep.TOP, mode=Mode.PRIVATE)
    with BuildSketch(Plane(origin=(-2.330718914, 1.5, 4.8), x_dir=(0, 1, 0), z_dir=(1, 0, 0))) as fillet_1_piece_14b_section:
        with BuildLine():
            CenterArc((0.132287566, -0.2), FILLET_1_R, 90, 41.409622109)
            Line((0, -0.05), (-0.002645751, -0.047))
            ThreePointArc((-0.002645751, -0.047), (-0.004, -0.025), (-0.004, 0))
            Line((-0.004, 0), (0, 0.004))
            Line((0, 0.004), (0.132287566, 0.004))
            Line((0.132287566, 0.004), (0.132287566, 0))
        make_face()
    fillet_1_piece_14b = extrude(amount=4.330718914, mode=Mode.PRIVATE)
    fillet_1_piece_14b = split(fillet_1_piece_14b, bisect_by=Plane(origin=(-2, 1.536281513, 4.788045002), z_dir=(-1, 0, 0)), keep=Keep.TOP, mode=Mode.PRIVATE)
    fillet_1_piece_14 = fillet_1_piece_14a & fillet_1_piece_14b
    add(fillet_1_piece_14, mode=Mode.SUBTRACT)
    with BuildSketch(Plane(origin=(-2, 1.5, 4.8), x_dir=(0, 1, 0), z_dir=(1, 0, 0))) as fillet_1_piece_15a_section:
        with BuildLine():
            CenterArc((0.132287566, -0.2), FILLET_1_R, 90, 41.409622109)
            Line((0, -0.05), (-0.002645751, -0.047))
            ThreePointArc((-0.002645751, -0.047), (-0.004, -0.025), (-0.004, 0))
            Line((-0.004, 0), (0, 0.004))
            Line((0, 0.004), (0.132287566, 0.004))
            Line((0.132287566, 0.004), (0.132287566, 0))
        make_face()
    fillet_1_piece_15a = extrude(amount=4.330718914, mode=Mode.PRIVATE)
    fillet_1_piece_15a = split(fillet_1_piece_15a, bisect_by=Plane(origin=(2, 1.536281513, 4.788045002), z_dir=(1, 0, 0)), keep=Keep.TOP, mode=Mode.PRIVATE)
    with BuildSketch(Plane(origin=(2, 1.830718914, 4.8), x_dir=(1, 0, 0), z_dir=(0, -1, 0))) as fillet_1_piece_15b_section:
        with BuildLine():
            CenterArc((0.132287566, -0.2), FILLET_1_R, 90, 41.409622109)
            Line((0, -0.05), (-0.002645751, -0.047))
            ThreePointArc((-0.002645751, -0.047), (-0.004, -0.025), (-0.004, 0))
            Line((-0.004, 0), (0, 0.004))
            Line((0, 0.004), (0.132287566, 0.004))
            Line((0.132287566, 0.004), (0.132287566, 0))
        make_face()
    fillet_1_piece_15b = extrude(amount=3.330718914, mode=Mode.PRIVATE)
    fillet_1_piece_15b = split(fillet_1_piece_15b, bisect_by=Plane(origin=(2.036281513, 1.5, 4.788045002), z_dir=(0, 1, 0)), keep=Keep.TOP, mode=Mode.PRIVATE)
    fillet_1_piece_15 = fillet_1_piece_15a & fillet_1_piece_15b
    add(fillet_1_piece_15, mode=Mode.SUBTRACT)
    with BuildSketch(Plane(origin=(-2, -1.830718914, 4.8), x_dir=(-1, 0, 0), z_dir=(0, 1, 0))) as fillet_1_piece_16a_section:
        with BuildLine():
            CenterArc((0.132287566, -0.2), FILLET_1_R, 90, 41.409622109)
            Line((0, -0.05), (-0.002645751, -0.047))
            ThreePointArc((-0.002645751, -0.047), (-0.004, -0.025), (-0.004, 0))
            Line((-0.004, 0), (0, 0.004))
            Line((0, 0.004), (0.132287566, 0.004))
            Line((0.132287566, 0.004), (0.132287566, 0))
        make_face()
    fillet_1_piece_16a = extrude(amount=3.330718914, mode=Mode.PRIVATE)
    fillet_1_piece_16a = split(fillet_1_piece_16a, bisect_by=Plane(origin=(-2.036281513, -1.5, 4.788045002), z_dir=(0, -1, 0)), keep=Keep.TOP, mode=Mode.PRIVATE)
    with BuildSketch(Plane(origin=(2, -1.5, 4.8), x_dir=(0, -1, 0), z_dir=(-1, 0, 0))) as fillet_1_piece_16b_section:
        with BuildLine():
            CenterArc((0.132287566, -0.2), FILLET_1_R, 90, 41.409622109)
            Line((0, -0.05), (-0.002645751, -0.047))
            ThreePointArc((-0.002645751, -0.047), (-0.004, -0.025), (-0.004, 0))
            Line((-0.004, 0), (0, 0.004))
            Line((0, 0.004), (0.132287566, 0.004))
            Line((0.132287566, 0.004), (0.132287566, 0))
        make_face()
    fillet_1_piece_16b = extrude(amount=4.330718914, mode=Mode.PRIVATE)
    fillet_1_piece_16b = split(fillet_1_piece_16b, bisect_by=Plane(origin=(-2, -1.536281513, 4.788045002), z_dir=(-1, 0, 0)), keep=Keep.TOP, mode=Mode.PRIVATE)
    fillet_1_piece_16 = fillet_1_piece_16a & fillet_1_piece_16b
    add(fillet_1_piece_16, mode=Mode.SUBTRACT)
    with BuildSketch(Plane(origin=(2.330718914, -1.5, 4.8), x_dir=(0, -1, 0), z_dir=(-1, 0, 0))) as fillet_1_piece_17a_section:
        with BuildLine():
            CenterArc((0.132287566, -0.2), FILLET_1_R, 90, 41.409622109)
            Line((0, -0.05), (-0.002645751, -0.047))
            ThreePointArc((-0.002645751, -0.047), (-0.004, -0.025), (-0.004, 0))
            Line((-0.004, 0), (0, 0.004))
            Line((0, 0.004), (0.132287566, 0.004))
            Line((0.132287566, 0.004), (0.132287566, 0))
        make_face()
    fillet_1_piece_17a = extrude(amount=4.330718914, mode=Mode.PRIVATE)
    fillet_1_piece_17a = split(fillet_1_piece_17a, bisect_by=Plane(origin=(2, -1.536281513, 4.788045002), z_dir=(1, 0, 0)), keep=Keep.TOP, mode=Mode.PRIVATE)
    with BuildSketch(Plane(origin=(2, 1.5, 4.8), x_dir=(1, 0, 0), z_dir=(0, -1, 0))) as fillet_1_piece_17b_section:
        with BuildLine():
            CenterArc((0.132287566, -0.2), FILLET_1_R, 90, 41.409622109)
            Line((0, -0.05), (-0.002645751, -0.047))
            ThreePointArc((-0.002645751, -0.047), (-0.004, -0.025), (-0.004, 0))
            Line((-0.004, 0), (0, 0.004))
            Line((0, 0.004), (0.132287566, 0.004))
            Line((0.132287566, 0.004), (0.132287566, 0))
        make_face()
    fillet_1_piece_17b = extrude(amount=3.330718914, mode=Mode.PRIVATE)
    fillet_1_piece_17b = split(fillet_1_piece_17b, bisect_by=Plane(origin=(2.036281513, -1.5, 4.788045002), z_dir=(0, -1, 0)), keep=Keep.TOP, mode=Mode.PRIVATE)
    fillet_1_piece_17 = fillet_1_piece_17a & fillet_1_piece_17b
    add(fillet_1_piece_17, mode=Mode.SUBTRACT)


solid = part.part
